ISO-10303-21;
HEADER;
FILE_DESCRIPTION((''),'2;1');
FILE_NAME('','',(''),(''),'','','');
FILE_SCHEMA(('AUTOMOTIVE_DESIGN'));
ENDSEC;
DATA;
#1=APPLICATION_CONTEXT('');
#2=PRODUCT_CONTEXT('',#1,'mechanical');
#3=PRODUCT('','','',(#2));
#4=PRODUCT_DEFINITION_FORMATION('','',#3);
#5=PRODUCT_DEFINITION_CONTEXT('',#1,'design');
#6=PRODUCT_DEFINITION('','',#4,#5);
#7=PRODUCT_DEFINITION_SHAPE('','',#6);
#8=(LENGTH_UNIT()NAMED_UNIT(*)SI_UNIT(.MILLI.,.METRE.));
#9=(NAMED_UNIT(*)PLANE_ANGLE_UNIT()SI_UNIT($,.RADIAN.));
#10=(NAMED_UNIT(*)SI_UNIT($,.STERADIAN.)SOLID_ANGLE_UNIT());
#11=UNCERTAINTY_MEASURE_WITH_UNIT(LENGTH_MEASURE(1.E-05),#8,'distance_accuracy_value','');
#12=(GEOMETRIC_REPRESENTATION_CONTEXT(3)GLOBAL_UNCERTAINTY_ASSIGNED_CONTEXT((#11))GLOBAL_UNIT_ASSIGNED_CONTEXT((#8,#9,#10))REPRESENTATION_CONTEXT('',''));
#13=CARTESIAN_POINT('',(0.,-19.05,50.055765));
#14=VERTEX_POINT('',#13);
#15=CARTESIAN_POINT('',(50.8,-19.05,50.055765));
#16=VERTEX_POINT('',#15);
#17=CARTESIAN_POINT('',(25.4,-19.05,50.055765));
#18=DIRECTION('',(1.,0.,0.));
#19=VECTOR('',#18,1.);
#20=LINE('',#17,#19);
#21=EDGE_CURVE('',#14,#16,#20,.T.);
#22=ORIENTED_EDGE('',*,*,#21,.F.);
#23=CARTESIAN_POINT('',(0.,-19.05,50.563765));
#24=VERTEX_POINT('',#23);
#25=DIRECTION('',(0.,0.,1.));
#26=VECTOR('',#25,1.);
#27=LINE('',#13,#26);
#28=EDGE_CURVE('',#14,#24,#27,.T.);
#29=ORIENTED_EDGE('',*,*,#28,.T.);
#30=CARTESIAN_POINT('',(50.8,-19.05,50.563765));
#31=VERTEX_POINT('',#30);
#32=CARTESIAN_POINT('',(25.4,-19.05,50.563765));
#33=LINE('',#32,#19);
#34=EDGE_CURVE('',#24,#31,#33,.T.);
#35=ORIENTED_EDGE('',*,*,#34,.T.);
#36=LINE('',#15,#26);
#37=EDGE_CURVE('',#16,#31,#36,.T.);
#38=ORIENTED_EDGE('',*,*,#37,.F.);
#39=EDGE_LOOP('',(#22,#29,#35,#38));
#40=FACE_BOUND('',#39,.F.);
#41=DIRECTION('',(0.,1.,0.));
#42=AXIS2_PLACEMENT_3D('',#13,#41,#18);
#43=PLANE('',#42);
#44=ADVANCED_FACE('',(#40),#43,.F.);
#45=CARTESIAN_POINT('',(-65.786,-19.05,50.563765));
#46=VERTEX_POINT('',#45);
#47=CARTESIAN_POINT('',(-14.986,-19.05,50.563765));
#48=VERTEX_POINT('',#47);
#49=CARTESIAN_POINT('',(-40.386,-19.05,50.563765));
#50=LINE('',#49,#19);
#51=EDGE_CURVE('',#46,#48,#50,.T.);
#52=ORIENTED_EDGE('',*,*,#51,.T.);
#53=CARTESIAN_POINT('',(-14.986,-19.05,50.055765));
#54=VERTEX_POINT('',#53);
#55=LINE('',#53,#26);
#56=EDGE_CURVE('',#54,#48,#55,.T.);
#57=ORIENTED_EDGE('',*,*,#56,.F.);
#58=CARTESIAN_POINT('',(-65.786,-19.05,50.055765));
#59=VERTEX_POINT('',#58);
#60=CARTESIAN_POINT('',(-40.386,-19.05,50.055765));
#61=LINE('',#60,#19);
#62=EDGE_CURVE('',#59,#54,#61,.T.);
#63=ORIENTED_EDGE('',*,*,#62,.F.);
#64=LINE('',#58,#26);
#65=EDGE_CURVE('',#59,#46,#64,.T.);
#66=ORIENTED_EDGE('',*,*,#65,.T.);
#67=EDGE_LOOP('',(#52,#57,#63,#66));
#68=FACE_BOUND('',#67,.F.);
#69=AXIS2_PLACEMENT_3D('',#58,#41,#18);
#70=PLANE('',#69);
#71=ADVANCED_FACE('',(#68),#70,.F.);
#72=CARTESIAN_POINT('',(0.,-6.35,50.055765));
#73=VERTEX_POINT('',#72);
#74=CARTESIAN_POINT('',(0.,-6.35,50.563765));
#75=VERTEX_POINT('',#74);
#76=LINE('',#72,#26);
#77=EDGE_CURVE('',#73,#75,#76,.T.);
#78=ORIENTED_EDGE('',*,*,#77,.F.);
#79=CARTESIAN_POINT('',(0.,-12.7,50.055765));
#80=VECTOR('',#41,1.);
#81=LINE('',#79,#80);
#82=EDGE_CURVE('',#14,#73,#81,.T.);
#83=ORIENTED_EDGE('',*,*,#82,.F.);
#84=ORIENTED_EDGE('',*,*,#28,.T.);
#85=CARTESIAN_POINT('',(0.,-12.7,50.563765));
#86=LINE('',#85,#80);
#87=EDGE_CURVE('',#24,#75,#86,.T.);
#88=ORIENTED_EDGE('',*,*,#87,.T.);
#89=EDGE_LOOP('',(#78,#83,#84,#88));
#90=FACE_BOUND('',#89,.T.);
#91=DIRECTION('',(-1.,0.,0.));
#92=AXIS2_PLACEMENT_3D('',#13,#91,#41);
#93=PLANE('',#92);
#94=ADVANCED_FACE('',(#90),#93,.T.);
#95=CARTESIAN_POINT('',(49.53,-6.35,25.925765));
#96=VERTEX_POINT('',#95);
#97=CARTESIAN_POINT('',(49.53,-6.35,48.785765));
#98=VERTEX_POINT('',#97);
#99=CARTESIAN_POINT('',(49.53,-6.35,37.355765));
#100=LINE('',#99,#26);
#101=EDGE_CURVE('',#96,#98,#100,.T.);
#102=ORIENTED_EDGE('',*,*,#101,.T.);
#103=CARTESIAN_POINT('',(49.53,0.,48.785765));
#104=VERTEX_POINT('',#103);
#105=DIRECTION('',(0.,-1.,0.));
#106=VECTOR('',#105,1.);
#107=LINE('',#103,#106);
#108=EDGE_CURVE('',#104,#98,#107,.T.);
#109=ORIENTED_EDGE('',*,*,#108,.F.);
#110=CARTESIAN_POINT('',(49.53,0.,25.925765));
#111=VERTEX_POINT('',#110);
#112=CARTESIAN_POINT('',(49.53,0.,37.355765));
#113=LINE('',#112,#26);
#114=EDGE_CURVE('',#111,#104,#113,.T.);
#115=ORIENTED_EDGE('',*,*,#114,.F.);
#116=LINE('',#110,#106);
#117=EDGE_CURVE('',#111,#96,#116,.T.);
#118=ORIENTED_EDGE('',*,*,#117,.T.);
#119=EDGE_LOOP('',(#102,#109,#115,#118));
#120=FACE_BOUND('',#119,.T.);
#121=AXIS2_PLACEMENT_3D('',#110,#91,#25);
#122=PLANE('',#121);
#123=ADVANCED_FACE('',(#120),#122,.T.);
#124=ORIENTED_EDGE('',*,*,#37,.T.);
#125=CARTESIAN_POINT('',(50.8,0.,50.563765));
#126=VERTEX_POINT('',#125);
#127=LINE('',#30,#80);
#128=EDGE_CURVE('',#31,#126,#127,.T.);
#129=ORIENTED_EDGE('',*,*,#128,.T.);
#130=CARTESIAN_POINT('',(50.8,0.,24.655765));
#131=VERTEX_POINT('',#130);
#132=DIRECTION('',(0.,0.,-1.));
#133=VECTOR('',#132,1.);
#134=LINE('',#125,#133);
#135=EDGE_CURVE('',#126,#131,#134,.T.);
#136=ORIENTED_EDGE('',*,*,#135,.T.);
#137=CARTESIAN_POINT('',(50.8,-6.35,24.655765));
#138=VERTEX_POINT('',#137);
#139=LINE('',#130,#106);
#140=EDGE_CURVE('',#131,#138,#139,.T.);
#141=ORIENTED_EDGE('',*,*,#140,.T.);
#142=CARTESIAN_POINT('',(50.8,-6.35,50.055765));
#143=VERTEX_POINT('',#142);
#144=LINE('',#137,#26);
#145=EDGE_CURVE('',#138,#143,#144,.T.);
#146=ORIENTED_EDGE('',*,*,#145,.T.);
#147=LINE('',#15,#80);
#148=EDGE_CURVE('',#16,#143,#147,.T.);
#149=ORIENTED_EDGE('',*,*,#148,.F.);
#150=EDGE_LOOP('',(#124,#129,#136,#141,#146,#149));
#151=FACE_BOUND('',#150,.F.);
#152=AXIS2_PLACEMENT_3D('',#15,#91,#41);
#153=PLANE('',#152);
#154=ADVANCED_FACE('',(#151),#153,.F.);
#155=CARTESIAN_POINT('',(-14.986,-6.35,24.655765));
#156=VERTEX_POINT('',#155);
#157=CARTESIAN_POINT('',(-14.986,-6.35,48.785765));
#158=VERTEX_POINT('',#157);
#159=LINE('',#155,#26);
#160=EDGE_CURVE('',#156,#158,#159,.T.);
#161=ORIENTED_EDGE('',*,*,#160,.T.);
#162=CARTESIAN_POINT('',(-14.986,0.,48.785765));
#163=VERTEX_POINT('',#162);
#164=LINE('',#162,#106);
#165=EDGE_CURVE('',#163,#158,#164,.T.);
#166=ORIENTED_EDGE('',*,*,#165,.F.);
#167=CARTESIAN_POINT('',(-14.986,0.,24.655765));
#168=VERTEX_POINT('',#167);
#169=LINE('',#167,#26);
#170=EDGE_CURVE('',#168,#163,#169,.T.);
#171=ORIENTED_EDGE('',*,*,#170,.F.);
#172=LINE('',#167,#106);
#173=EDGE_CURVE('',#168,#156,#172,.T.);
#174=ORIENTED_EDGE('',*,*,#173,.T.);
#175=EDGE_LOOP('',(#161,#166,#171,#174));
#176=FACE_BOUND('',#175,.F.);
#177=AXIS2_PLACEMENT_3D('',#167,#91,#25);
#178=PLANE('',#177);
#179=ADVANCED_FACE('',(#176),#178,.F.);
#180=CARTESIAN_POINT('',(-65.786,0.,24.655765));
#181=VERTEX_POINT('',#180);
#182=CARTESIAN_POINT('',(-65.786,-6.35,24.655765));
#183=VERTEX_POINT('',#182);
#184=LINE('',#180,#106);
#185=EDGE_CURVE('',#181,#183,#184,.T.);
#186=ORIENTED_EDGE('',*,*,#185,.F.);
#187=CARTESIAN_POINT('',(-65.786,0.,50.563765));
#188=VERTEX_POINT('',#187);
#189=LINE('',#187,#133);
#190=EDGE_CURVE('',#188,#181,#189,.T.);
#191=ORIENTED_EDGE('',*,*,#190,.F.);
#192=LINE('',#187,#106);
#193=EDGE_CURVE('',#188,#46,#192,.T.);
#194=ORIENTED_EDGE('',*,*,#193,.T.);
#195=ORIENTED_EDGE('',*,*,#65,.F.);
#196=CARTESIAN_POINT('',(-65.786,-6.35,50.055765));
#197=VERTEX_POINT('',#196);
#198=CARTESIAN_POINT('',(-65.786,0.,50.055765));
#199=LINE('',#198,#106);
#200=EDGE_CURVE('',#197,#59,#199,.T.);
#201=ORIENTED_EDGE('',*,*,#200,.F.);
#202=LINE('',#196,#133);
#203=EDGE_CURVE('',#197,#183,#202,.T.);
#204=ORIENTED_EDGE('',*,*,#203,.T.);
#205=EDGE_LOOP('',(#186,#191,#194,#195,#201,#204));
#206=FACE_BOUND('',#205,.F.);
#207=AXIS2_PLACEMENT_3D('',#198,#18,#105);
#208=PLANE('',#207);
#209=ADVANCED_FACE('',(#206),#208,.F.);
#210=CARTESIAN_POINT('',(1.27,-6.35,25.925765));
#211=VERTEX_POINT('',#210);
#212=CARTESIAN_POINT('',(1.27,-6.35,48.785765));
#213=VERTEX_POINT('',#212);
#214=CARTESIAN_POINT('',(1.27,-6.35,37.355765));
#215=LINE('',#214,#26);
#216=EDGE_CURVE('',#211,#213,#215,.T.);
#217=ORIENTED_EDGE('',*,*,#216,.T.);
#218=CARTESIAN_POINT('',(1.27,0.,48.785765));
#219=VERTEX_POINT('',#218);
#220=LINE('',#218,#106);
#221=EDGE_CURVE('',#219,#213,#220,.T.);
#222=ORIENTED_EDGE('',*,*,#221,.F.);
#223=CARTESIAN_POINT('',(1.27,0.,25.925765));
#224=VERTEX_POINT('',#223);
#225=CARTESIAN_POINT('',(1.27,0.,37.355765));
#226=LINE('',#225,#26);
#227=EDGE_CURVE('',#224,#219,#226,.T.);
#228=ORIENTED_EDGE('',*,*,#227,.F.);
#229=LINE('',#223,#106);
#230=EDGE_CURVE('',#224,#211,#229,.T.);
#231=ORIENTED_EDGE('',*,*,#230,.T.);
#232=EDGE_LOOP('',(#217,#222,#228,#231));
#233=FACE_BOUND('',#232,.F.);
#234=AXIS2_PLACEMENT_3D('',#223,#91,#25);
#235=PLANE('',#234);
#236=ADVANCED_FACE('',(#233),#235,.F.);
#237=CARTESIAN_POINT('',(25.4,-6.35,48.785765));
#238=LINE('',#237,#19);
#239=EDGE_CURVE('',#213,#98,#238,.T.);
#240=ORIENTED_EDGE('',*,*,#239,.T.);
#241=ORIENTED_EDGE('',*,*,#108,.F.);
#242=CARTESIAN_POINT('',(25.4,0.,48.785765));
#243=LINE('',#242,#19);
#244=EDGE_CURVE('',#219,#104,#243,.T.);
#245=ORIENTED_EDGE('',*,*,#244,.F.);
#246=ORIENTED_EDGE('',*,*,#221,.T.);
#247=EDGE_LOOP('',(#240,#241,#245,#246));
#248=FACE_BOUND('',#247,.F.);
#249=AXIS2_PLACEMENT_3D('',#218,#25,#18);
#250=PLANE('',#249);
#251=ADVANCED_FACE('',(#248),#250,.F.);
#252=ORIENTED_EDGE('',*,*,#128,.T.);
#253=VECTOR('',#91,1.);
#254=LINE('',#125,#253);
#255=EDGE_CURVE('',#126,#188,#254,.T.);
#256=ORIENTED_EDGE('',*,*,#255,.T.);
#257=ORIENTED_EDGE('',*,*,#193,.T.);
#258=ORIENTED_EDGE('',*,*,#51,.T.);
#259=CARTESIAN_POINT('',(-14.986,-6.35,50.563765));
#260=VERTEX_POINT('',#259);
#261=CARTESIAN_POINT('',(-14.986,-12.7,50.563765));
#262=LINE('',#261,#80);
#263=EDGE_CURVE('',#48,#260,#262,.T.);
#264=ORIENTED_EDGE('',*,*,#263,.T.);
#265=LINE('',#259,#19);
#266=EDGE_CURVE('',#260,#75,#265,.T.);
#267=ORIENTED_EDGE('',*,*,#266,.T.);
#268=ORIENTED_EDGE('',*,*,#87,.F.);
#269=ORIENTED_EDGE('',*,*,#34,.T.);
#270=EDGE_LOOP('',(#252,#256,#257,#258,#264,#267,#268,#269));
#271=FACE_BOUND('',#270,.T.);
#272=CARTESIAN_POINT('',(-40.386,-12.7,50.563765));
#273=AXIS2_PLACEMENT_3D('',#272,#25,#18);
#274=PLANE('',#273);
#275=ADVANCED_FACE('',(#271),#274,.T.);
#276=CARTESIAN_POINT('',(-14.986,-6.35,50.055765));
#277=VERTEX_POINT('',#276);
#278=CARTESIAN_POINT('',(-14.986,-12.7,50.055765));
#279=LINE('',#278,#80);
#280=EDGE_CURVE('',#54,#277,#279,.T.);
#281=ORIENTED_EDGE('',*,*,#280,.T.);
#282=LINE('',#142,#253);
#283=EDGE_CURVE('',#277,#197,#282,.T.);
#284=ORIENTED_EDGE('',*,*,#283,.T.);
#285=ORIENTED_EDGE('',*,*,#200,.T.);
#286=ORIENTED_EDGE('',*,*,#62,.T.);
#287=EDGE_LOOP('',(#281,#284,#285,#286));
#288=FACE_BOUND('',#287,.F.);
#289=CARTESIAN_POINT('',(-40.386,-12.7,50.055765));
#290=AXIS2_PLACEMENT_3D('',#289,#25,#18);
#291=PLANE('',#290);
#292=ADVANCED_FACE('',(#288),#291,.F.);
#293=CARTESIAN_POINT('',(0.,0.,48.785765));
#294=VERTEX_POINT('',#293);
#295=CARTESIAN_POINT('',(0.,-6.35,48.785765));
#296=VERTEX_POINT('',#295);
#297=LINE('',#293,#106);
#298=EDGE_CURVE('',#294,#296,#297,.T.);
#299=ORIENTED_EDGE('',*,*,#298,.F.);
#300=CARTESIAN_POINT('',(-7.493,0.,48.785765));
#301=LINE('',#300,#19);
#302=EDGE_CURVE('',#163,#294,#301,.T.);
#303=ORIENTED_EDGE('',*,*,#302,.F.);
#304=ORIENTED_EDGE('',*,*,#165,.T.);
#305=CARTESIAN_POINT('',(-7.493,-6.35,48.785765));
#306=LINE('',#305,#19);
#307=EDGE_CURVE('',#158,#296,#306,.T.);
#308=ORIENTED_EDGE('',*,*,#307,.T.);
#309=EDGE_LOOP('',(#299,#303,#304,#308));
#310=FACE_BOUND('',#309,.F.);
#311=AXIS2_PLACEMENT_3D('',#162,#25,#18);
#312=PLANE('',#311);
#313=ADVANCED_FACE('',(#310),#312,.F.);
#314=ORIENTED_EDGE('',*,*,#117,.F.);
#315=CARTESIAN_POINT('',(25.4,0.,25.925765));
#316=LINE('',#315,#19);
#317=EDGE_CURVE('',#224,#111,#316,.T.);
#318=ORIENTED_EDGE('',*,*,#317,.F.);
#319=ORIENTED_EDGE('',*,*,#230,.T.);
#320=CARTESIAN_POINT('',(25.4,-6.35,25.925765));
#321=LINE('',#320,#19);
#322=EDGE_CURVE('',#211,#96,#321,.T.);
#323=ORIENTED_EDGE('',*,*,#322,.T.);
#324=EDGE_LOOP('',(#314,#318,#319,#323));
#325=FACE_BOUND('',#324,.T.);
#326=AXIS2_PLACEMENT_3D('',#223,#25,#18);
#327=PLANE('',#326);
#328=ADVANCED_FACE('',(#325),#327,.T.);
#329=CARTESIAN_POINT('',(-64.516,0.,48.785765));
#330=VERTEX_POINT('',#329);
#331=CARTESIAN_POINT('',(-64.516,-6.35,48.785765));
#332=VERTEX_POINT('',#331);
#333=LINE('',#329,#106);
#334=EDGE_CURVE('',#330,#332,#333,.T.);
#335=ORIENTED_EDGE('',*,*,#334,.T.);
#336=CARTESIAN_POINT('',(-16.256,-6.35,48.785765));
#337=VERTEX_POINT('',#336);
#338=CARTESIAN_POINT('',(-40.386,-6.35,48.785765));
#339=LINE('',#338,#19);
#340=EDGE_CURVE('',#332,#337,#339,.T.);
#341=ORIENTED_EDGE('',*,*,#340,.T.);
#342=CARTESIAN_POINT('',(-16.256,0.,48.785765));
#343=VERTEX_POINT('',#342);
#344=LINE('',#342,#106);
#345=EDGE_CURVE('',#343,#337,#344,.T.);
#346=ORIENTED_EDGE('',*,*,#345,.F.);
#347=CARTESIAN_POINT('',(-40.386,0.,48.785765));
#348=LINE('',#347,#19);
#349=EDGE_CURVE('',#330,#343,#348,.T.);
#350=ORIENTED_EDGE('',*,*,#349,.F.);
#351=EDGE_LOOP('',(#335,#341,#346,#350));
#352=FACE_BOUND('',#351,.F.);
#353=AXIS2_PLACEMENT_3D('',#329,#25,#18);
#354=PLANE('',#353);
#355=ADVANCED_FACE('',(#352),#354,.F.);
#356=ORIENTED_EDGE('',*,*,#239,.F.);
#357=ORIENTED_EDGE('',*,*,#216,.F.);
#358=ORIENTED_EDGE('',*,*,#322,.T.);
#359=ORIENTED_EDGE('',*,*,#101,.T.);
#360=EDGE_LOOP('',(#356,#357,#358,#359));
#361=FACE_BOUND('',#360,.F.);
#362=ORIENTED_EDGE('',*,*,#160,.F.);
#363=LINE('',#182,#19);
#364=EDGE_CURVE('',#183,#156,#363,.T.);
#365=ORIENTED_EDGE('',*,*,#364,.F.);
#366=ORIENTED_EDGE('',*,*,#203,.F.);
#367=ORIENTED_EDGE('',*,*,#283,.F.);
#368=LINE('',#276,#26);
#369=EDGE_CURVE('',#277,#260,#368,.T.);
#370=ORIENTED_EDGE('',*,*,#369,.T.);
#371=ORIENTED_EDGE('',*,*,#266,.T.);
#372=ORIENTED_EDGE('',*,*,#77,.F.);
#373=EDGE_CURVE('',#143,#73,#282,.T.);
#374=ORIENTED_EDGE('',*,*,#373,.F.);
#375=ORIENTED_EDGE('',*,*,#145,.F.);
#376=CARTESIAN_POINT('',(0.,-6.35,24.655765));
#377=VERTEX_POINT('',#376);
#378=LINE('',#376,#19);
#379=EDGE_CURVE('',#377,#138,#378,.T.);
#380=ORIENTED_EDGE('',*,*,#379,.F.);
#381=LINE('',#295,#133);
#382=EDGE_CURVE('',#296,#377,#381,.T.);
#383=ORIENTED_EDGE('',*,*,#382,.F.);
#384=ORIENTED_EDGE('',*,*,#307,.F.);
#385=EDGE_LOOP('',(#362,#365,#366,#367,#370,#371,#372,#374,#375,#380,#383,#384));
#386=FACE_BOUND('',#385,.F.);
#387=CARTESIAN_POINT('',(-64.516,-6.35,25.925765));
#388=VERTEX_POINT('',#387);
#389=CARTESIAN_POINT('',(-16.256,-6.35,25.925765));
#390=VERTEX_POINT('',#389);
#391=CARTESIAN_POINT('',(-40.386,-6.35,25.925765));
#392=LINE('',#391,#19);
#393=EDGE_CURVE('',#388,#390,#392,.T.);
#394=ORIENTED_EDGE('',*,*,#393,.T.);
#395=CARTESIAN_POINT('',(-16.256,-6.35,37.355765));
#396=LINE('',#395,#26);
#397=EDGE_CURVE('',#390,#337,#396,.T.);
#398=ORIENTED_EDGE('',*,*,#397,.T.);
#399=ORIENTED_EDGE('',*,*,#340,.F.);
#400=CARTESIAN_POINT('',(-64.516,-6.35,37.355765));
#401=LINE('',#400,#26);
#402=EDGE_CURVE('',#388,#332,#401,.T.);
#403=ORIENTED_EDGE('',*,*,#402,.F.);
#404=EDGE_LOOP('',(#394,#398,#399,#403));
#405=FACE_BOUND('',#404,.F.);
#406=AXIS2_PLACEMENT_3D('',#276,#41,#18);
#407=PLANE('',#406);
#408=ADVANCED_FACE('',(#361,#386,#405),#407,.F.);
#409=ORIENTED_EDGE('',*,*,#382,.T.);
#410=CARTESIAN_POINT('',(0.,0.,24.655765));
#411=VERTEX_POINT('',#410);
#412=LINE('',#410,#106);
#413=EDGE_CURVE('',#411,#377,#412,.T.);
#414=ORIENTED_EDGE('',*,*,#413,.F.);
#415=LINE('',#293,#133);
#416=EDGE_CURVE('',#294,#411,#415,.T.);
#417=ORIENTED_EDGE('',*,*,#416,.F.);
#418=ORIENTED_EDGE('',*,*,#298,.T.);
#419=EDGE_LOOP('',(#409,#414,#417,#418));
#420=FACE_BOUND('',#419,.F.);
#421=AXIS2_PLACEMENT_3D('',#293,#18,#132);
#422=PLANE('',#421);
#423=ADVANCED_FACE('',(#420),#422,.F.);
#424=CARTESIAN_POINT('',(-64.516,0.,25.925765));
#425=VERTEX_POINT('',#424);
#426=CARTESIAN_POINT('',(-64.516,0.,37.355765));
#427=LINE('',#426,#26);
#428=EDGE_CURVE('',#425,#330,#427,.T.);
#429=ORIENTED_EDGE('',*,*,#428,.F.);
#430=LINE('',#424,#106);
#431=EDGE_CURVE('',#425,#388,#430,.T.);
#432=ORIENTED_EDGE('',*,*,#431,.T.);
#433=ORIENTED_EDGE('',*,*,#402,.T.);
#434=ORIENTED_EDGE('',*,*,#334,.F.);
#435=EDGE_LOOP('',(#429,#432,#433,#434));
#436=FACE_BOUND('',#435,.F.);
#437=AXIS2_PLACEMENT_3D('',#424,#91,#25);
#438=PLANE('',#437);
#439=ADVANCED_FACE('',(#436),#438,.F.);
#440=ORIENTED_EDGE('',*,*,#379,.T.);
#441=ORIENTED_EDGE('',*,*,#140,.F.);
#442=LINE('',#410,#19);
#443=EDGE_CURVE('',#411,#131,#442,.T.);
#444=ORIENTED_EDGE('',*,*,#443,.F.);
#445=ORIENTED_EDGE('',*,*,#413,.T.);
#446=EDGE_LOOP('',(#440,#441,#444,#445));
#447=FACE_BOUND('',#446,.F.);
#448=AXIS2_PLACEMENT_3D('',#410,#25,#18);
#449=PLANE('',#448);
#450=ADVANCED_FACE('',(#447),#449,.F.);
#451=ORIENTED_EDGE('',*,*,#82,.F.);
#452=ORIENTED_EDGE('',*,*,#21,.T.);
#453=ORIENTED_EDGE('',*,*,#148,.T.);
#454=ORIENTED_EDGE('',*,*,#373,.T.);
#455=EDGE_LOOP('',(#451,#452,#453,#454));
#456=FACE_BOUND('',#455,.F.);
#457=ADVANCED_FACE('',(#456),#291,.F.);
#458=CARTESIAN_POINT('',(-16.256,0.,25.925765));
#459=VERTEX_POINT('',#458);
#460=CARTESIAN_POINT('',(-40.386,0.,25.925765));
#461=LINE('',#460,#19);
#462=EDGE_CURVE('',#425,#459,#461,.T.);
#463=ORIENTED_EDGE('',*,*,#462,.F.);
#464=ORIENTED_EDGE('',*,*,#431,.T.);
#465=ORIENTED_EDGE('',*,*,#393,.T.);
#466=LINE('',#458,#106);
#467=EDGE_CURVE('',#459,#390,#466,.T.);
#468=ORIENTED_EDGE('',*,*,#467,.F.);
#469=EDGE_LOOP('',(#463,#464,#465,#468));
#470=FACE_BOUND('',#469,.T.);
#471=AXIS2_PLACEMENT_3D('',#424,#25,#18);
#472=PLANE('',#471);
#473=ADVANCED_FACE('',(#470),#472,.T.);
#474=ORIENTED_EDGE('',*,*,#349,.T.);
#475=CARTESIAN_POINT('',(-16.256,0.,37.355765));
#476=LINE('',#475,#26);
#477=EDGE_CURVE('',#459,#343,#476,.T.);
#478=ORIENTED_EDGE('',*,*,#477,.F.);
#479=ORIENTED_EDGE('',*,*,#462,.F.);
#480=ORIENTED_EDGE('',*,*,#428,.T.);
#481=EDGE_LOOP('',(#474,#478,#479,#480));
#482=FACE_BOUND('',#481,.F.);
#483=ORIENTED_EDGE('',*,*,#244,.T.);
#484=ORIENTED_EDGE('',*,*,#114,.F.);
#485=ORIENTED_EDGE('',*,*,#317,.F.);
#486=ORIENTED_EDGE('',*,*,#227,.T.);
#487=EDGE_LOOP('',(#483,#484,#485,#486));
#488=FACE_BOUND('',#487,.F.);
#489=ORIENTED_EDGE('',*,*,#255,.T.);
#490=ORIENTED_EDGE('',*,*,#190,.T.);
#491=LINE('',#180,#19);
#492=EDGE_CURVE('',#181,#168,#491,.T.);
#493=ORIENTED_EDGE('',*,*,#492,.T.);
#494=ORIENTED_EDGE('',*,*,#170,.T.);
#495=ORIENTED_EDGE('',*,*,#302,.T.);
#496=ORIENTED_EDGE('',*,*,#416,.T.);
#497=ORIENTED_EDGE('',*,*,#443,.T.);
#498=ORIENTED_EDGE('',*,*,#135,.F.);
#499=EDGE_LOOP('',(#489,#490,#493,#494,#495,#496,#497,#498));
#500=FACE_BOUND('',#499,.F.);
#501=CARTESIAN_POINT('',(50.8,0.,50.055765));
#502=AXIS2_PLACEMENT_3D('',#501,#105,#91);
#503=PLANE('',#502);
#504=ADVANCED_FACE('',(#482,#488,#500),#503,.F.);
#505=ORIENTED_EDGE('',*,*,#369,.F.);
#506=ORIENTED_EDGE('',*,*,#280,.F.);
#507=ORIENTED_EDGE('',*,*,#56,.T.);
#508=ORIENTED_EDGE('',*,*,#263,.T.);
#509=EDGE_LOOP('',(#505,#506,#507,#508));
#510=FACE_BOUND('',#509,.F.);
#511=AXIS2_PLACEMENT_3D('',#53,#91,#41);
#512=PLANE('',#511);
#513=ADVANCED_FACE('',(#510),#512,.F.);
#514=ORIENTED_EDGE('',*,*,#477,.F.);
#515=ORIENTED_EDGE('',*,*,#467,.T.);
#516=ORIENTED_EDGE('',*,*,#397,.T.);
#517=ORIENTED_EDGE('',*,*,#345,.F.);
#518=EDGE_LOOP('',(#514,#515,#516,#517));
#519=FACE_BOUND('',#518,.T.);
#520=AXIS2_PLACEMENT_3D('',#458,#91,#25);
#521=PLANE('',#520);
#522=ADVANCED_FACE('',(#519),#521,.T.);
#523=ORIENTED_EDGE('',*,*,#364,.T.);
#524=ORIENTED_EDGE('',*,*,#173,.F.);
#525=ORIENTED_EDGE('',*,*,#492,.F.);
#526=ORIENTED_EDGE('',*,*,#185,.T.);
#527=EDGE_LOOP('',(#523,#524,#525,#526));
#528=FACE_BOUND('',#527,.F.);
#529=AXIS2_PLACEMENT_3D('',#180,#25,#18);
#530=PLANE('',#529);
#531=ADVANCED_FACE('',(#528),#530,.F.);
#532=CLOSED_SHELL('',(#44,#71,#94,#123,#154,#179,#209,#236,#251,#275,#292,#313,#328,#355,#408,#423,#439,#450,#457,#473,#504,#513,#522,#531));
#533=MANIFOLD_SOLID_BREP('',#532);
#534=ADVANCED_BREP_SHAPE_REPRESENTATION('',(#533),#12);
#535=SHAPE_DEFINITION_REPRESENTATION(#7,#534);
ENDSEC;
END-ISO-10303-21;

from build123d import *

# Parameters (mm, degrees)
F0_W     = 14.986
F0_H     = 1.27
F1_DEPTH = 1.27
F0_W_2   = 48.26
F0_H_2   = 22.86
F2_DEPTH = 6.35
F3_W     = 50.8
F3_H     = 12.7
F4_DEPTH = 0.508


# Not quite as in the source:
# - a feature names something its author has since deleted; it is built from what else it names


with BuildPart() as f1:
    # F0 (on Front) → F1 (new body)
    with BuildSketch(Plane.XZ):
        with Locations((-7.493, 49.4207651077)):
            Rectangle(F0_W, F0_H)
    extrude(amount=F1_DEPTH)

    # F0 (on Front) → F2 (join)
    with BuildSketch(Plane.XZ):
        Polygon((-14.986, 50.0557651077), (-65.786, 50.0557651077), (-65.786, 24.6557651077), (-14.986, 24.6557651077), (-14.986, 34.8157651077), (-14.986, 48.7857651077), align=None)
        with Locations((-40.386, 37.3557651077)):
            Rectangle(F0_W_2, F0_H_2, mode=Mode.SUBTRACT)
        with Locations((-7.493, 49.4207651077)):
            Rectangle(F0_W, F0_H)
        Polygon((50.8, 50.0557651077), (0, 50.0557651077), (0, 48.7857651077), (0, 34.8157651077), (0, 24.6557651077), (50.8, 24.6557651077), align=None)
        with Locations((25.4, 37.3557651077)):
            Rectangle(F0_W_2, F0_H_2, mode=Mode.SUBTRACT)
    extrude(amount=F2_DEPTH)

    # F3 (on face) → F4 (join)
    with BuildSketch(Plane.XY.offset(50.0557651077)):
        with Locations((-40.386, -12.7)):
            Rectangle(F3_W, F3_H)
        with Locations((25.4, -12.7)):
            Rectangle(F3_W, F3_H)
        Polygon((-65.786, 0), (-65.786, -6.35), (-14.986, -6.35), (0, -6.35), (50.8, -6.35), (50.8, 0), align=None)
    extrude(amount=F4_DEPTH)


solid = f1.part
